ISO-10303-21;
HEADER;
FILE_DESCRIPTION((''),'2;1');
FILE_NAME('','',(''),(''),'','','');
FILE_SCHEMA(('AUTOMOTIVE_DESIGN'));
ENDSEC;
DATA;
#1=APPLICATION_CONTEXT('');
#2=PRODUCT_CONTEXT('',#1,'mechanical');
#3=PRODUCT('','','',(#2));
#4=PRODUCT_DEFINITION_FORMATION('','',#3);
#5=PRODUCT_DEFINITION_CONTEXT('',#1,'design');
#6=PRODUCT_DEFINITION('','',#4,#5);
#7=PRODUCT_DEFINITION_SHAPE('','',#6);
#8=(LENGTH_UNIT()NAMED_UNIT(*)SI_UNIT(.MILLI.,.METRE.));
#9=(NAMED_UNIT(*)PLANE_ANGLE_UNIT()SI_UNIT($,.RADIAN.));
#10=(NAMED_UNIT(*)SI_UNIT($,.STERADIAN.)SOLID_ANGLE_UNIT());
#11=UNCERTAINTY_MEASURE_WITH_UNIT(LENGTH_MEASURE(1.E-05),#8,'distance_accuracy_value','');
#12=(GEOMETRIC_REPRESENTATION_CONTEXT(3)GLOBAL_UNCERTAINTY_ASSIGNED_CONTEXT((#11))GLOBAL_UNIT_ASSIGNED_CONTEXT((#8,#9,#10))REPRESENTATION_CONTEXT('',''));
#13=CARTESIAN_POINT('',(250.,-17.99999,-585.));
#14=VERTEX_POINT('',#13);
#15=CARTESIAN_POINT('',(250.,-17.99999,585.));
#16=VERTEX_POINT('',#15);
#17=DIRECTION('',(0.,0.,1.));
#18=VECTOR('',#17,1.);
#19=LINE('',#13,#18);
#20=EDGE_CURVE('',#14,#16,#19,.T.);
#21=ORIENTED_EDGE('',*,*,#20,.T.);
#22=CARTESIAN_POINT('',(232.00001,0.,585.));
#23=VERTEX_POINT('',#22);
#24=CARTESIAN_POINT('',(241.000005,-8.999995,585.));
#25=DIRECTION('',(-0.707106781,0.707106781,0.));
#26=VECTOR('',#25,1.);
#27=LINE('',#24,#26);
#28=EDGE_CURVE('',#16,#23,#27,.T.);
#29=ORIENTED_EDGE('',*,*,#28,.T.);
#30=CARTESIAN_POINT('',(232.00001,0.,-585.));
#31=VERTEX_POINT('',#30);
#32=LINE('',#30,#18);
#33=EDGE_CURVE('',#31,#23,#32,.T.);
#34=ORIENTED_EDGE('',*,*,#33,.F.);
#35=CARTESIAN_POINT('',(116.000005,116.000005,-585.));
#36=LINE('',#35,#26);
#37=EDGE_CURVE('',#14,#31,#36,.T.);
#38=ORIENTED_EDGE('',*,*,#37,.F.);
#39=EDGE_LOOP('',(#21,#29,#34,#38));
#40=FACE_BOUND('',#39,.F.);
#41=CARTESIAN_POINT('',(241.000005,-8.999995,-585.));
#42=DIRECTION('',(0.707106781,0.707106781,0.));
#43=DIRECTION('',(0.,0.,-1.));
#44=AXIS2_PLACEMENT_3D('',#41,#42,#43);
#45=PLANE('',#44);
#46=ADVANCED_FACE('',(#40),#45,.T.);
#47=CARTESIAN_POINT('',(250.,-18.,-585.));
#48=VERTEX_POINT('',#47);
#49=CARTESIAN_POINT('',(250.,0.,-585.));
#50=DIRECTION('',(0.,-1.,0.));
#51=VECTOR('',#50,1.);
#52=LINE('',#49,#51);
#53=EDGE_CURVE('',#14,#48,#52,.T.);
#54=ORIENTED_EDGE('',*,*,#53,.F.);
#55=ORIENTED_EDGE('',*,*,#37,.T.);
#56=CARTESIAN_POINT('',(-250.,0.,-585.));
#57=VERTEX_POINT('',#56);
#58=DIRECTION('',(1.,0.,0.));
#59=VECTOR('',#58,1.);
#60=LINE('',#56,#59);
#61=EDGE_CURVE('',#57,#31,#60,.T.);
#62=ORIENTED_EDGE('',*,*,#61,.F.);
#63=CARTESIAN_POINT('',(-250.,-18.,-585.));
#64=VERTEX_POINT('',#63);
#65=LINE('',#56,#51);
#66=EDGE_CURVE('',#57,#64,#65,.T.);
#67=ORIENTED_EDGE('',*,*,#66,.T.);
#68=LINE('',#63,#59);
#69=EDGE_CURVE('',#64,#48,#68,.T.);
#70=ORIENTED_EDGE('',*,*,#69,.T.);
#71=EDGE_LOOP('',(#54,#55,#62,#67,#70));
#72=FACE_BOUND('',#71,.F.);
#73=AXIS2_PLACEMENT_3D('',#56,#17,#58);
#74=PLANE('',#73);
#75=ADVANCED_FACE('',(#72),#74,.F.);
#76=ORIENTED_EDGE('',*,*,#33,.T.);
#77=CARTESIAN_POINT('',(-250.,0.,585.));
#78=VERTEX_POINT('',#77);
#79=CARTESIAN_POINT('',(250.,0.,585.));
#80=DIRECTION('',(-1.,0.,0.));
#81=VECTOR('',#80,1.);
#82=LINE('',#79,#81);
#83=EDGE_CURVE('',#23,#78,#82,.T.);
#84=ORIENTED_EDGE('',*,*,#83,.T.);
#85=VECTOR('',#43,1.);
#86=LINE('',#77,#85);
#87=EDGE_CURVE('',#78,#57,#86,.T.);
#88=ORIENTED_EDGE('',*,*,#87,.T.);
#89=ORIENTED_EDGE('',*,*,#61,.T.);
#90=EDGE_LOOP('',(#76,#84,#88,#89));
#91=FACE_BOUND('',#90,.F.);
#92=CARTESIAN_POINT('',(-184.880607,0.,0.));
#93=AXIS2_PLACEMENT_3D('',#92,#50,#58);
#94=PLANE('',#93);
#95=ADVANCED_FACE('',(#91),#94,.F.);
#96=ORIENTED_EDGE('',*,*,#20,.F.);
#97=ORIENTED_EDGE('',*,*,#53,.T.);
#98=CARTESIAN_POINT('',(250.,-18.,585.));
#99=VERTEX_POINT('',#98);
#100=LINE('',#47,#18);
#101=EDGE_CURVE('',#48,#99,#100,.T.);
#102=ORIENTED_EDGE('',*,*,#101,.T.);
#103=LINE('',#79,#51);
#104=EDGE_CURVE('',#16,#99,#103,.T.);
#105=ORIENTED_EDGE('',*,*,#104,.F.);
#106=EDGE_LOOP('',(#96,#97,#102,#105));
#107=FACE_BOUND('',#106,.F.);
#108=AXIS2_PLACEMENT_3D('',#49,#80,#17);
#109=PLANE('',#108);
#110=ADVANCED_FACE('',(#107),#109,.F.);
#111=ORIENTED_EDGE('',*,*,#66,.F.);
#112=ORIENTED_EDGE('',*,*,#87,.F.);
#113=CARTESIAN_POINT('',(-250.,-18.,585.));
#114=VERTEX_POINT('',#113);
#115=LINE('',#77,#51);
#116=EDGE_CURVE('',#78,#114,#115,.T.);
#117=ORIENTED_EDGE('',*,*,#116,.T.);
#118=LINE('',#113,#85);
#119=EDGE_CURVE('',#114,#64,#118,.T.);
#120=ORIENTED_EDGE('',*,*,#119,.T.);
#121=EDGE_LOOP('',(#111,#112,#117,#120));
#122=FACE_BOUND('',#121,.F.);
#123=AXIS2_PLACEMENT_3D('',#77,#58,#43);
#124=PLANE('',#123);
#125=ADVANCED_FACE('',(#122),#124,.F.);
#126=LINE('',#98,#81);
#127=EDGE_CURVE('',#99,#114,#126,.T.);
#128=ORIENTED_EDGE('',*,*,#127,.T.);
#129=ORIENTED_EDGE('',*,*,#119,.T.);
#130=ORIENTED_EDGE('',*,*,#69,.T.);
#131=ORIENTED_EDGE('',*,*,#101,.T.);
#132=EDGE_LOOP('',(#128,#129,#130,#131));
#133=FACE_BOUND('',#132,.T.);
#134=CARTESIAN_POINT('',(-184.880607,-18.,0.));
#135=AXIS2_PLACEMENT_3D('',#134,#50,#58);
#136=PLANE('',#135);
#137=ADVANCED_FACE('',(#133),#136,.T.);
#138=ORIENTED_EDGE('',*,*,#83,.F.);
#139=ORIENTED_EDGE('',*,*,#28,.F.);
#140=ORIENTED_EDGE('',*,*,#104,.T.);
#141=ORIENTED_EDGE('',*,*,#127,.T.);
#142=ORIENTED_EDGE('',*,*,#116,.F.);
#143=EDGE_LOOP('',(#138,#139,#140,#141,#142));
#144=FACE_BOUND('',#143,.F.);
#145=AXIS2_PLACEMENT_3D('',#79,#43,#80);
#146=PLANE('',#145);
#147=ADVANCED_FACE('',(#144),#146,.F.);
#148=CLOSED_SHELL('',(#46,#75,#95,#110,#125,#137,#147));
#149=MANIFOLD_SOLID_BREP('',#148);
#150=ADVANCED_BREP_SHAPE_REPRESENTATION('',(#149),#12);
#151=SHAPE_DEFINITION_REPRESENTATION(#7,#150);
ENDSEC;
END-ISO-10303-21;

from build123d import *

# Parameters (mm, degrees)
F1_DEPTH = 18
F2_SIZE  = 17.99999


# Not quite as in the source:
# - a fillet or chamfer is up to 0.001 mm smaller than in the source, because OpenCascade refuses the exact size


with BuildPart() as f1:
    # F0 (on Front) → F1 (new body)
    with BuildSketch(Plane.XZ):
        Polygon((0, 0), (-250, 585), (-250, -585), align=None)
        Polygon((250, 585), (-250, 585), (0, 0), align=None)
        Polygon((250, -585), (250, 585), (0, 0), align=None)
        Polygon((0, 0), (-250, -585), (250, -585), align=None)
    extrude(amount=F1_DEPTH)

    # F2 (size 18 in the source; OpenCascade refuses exactly that, so slightly less here)
    f2_edges = [f1.edges().sort_by_distance(p)[0] for p in [
        (250, 0, 0),
    ]]
    chamfer(f2_edges, length=F2_SIZE)


solid = f1.part
